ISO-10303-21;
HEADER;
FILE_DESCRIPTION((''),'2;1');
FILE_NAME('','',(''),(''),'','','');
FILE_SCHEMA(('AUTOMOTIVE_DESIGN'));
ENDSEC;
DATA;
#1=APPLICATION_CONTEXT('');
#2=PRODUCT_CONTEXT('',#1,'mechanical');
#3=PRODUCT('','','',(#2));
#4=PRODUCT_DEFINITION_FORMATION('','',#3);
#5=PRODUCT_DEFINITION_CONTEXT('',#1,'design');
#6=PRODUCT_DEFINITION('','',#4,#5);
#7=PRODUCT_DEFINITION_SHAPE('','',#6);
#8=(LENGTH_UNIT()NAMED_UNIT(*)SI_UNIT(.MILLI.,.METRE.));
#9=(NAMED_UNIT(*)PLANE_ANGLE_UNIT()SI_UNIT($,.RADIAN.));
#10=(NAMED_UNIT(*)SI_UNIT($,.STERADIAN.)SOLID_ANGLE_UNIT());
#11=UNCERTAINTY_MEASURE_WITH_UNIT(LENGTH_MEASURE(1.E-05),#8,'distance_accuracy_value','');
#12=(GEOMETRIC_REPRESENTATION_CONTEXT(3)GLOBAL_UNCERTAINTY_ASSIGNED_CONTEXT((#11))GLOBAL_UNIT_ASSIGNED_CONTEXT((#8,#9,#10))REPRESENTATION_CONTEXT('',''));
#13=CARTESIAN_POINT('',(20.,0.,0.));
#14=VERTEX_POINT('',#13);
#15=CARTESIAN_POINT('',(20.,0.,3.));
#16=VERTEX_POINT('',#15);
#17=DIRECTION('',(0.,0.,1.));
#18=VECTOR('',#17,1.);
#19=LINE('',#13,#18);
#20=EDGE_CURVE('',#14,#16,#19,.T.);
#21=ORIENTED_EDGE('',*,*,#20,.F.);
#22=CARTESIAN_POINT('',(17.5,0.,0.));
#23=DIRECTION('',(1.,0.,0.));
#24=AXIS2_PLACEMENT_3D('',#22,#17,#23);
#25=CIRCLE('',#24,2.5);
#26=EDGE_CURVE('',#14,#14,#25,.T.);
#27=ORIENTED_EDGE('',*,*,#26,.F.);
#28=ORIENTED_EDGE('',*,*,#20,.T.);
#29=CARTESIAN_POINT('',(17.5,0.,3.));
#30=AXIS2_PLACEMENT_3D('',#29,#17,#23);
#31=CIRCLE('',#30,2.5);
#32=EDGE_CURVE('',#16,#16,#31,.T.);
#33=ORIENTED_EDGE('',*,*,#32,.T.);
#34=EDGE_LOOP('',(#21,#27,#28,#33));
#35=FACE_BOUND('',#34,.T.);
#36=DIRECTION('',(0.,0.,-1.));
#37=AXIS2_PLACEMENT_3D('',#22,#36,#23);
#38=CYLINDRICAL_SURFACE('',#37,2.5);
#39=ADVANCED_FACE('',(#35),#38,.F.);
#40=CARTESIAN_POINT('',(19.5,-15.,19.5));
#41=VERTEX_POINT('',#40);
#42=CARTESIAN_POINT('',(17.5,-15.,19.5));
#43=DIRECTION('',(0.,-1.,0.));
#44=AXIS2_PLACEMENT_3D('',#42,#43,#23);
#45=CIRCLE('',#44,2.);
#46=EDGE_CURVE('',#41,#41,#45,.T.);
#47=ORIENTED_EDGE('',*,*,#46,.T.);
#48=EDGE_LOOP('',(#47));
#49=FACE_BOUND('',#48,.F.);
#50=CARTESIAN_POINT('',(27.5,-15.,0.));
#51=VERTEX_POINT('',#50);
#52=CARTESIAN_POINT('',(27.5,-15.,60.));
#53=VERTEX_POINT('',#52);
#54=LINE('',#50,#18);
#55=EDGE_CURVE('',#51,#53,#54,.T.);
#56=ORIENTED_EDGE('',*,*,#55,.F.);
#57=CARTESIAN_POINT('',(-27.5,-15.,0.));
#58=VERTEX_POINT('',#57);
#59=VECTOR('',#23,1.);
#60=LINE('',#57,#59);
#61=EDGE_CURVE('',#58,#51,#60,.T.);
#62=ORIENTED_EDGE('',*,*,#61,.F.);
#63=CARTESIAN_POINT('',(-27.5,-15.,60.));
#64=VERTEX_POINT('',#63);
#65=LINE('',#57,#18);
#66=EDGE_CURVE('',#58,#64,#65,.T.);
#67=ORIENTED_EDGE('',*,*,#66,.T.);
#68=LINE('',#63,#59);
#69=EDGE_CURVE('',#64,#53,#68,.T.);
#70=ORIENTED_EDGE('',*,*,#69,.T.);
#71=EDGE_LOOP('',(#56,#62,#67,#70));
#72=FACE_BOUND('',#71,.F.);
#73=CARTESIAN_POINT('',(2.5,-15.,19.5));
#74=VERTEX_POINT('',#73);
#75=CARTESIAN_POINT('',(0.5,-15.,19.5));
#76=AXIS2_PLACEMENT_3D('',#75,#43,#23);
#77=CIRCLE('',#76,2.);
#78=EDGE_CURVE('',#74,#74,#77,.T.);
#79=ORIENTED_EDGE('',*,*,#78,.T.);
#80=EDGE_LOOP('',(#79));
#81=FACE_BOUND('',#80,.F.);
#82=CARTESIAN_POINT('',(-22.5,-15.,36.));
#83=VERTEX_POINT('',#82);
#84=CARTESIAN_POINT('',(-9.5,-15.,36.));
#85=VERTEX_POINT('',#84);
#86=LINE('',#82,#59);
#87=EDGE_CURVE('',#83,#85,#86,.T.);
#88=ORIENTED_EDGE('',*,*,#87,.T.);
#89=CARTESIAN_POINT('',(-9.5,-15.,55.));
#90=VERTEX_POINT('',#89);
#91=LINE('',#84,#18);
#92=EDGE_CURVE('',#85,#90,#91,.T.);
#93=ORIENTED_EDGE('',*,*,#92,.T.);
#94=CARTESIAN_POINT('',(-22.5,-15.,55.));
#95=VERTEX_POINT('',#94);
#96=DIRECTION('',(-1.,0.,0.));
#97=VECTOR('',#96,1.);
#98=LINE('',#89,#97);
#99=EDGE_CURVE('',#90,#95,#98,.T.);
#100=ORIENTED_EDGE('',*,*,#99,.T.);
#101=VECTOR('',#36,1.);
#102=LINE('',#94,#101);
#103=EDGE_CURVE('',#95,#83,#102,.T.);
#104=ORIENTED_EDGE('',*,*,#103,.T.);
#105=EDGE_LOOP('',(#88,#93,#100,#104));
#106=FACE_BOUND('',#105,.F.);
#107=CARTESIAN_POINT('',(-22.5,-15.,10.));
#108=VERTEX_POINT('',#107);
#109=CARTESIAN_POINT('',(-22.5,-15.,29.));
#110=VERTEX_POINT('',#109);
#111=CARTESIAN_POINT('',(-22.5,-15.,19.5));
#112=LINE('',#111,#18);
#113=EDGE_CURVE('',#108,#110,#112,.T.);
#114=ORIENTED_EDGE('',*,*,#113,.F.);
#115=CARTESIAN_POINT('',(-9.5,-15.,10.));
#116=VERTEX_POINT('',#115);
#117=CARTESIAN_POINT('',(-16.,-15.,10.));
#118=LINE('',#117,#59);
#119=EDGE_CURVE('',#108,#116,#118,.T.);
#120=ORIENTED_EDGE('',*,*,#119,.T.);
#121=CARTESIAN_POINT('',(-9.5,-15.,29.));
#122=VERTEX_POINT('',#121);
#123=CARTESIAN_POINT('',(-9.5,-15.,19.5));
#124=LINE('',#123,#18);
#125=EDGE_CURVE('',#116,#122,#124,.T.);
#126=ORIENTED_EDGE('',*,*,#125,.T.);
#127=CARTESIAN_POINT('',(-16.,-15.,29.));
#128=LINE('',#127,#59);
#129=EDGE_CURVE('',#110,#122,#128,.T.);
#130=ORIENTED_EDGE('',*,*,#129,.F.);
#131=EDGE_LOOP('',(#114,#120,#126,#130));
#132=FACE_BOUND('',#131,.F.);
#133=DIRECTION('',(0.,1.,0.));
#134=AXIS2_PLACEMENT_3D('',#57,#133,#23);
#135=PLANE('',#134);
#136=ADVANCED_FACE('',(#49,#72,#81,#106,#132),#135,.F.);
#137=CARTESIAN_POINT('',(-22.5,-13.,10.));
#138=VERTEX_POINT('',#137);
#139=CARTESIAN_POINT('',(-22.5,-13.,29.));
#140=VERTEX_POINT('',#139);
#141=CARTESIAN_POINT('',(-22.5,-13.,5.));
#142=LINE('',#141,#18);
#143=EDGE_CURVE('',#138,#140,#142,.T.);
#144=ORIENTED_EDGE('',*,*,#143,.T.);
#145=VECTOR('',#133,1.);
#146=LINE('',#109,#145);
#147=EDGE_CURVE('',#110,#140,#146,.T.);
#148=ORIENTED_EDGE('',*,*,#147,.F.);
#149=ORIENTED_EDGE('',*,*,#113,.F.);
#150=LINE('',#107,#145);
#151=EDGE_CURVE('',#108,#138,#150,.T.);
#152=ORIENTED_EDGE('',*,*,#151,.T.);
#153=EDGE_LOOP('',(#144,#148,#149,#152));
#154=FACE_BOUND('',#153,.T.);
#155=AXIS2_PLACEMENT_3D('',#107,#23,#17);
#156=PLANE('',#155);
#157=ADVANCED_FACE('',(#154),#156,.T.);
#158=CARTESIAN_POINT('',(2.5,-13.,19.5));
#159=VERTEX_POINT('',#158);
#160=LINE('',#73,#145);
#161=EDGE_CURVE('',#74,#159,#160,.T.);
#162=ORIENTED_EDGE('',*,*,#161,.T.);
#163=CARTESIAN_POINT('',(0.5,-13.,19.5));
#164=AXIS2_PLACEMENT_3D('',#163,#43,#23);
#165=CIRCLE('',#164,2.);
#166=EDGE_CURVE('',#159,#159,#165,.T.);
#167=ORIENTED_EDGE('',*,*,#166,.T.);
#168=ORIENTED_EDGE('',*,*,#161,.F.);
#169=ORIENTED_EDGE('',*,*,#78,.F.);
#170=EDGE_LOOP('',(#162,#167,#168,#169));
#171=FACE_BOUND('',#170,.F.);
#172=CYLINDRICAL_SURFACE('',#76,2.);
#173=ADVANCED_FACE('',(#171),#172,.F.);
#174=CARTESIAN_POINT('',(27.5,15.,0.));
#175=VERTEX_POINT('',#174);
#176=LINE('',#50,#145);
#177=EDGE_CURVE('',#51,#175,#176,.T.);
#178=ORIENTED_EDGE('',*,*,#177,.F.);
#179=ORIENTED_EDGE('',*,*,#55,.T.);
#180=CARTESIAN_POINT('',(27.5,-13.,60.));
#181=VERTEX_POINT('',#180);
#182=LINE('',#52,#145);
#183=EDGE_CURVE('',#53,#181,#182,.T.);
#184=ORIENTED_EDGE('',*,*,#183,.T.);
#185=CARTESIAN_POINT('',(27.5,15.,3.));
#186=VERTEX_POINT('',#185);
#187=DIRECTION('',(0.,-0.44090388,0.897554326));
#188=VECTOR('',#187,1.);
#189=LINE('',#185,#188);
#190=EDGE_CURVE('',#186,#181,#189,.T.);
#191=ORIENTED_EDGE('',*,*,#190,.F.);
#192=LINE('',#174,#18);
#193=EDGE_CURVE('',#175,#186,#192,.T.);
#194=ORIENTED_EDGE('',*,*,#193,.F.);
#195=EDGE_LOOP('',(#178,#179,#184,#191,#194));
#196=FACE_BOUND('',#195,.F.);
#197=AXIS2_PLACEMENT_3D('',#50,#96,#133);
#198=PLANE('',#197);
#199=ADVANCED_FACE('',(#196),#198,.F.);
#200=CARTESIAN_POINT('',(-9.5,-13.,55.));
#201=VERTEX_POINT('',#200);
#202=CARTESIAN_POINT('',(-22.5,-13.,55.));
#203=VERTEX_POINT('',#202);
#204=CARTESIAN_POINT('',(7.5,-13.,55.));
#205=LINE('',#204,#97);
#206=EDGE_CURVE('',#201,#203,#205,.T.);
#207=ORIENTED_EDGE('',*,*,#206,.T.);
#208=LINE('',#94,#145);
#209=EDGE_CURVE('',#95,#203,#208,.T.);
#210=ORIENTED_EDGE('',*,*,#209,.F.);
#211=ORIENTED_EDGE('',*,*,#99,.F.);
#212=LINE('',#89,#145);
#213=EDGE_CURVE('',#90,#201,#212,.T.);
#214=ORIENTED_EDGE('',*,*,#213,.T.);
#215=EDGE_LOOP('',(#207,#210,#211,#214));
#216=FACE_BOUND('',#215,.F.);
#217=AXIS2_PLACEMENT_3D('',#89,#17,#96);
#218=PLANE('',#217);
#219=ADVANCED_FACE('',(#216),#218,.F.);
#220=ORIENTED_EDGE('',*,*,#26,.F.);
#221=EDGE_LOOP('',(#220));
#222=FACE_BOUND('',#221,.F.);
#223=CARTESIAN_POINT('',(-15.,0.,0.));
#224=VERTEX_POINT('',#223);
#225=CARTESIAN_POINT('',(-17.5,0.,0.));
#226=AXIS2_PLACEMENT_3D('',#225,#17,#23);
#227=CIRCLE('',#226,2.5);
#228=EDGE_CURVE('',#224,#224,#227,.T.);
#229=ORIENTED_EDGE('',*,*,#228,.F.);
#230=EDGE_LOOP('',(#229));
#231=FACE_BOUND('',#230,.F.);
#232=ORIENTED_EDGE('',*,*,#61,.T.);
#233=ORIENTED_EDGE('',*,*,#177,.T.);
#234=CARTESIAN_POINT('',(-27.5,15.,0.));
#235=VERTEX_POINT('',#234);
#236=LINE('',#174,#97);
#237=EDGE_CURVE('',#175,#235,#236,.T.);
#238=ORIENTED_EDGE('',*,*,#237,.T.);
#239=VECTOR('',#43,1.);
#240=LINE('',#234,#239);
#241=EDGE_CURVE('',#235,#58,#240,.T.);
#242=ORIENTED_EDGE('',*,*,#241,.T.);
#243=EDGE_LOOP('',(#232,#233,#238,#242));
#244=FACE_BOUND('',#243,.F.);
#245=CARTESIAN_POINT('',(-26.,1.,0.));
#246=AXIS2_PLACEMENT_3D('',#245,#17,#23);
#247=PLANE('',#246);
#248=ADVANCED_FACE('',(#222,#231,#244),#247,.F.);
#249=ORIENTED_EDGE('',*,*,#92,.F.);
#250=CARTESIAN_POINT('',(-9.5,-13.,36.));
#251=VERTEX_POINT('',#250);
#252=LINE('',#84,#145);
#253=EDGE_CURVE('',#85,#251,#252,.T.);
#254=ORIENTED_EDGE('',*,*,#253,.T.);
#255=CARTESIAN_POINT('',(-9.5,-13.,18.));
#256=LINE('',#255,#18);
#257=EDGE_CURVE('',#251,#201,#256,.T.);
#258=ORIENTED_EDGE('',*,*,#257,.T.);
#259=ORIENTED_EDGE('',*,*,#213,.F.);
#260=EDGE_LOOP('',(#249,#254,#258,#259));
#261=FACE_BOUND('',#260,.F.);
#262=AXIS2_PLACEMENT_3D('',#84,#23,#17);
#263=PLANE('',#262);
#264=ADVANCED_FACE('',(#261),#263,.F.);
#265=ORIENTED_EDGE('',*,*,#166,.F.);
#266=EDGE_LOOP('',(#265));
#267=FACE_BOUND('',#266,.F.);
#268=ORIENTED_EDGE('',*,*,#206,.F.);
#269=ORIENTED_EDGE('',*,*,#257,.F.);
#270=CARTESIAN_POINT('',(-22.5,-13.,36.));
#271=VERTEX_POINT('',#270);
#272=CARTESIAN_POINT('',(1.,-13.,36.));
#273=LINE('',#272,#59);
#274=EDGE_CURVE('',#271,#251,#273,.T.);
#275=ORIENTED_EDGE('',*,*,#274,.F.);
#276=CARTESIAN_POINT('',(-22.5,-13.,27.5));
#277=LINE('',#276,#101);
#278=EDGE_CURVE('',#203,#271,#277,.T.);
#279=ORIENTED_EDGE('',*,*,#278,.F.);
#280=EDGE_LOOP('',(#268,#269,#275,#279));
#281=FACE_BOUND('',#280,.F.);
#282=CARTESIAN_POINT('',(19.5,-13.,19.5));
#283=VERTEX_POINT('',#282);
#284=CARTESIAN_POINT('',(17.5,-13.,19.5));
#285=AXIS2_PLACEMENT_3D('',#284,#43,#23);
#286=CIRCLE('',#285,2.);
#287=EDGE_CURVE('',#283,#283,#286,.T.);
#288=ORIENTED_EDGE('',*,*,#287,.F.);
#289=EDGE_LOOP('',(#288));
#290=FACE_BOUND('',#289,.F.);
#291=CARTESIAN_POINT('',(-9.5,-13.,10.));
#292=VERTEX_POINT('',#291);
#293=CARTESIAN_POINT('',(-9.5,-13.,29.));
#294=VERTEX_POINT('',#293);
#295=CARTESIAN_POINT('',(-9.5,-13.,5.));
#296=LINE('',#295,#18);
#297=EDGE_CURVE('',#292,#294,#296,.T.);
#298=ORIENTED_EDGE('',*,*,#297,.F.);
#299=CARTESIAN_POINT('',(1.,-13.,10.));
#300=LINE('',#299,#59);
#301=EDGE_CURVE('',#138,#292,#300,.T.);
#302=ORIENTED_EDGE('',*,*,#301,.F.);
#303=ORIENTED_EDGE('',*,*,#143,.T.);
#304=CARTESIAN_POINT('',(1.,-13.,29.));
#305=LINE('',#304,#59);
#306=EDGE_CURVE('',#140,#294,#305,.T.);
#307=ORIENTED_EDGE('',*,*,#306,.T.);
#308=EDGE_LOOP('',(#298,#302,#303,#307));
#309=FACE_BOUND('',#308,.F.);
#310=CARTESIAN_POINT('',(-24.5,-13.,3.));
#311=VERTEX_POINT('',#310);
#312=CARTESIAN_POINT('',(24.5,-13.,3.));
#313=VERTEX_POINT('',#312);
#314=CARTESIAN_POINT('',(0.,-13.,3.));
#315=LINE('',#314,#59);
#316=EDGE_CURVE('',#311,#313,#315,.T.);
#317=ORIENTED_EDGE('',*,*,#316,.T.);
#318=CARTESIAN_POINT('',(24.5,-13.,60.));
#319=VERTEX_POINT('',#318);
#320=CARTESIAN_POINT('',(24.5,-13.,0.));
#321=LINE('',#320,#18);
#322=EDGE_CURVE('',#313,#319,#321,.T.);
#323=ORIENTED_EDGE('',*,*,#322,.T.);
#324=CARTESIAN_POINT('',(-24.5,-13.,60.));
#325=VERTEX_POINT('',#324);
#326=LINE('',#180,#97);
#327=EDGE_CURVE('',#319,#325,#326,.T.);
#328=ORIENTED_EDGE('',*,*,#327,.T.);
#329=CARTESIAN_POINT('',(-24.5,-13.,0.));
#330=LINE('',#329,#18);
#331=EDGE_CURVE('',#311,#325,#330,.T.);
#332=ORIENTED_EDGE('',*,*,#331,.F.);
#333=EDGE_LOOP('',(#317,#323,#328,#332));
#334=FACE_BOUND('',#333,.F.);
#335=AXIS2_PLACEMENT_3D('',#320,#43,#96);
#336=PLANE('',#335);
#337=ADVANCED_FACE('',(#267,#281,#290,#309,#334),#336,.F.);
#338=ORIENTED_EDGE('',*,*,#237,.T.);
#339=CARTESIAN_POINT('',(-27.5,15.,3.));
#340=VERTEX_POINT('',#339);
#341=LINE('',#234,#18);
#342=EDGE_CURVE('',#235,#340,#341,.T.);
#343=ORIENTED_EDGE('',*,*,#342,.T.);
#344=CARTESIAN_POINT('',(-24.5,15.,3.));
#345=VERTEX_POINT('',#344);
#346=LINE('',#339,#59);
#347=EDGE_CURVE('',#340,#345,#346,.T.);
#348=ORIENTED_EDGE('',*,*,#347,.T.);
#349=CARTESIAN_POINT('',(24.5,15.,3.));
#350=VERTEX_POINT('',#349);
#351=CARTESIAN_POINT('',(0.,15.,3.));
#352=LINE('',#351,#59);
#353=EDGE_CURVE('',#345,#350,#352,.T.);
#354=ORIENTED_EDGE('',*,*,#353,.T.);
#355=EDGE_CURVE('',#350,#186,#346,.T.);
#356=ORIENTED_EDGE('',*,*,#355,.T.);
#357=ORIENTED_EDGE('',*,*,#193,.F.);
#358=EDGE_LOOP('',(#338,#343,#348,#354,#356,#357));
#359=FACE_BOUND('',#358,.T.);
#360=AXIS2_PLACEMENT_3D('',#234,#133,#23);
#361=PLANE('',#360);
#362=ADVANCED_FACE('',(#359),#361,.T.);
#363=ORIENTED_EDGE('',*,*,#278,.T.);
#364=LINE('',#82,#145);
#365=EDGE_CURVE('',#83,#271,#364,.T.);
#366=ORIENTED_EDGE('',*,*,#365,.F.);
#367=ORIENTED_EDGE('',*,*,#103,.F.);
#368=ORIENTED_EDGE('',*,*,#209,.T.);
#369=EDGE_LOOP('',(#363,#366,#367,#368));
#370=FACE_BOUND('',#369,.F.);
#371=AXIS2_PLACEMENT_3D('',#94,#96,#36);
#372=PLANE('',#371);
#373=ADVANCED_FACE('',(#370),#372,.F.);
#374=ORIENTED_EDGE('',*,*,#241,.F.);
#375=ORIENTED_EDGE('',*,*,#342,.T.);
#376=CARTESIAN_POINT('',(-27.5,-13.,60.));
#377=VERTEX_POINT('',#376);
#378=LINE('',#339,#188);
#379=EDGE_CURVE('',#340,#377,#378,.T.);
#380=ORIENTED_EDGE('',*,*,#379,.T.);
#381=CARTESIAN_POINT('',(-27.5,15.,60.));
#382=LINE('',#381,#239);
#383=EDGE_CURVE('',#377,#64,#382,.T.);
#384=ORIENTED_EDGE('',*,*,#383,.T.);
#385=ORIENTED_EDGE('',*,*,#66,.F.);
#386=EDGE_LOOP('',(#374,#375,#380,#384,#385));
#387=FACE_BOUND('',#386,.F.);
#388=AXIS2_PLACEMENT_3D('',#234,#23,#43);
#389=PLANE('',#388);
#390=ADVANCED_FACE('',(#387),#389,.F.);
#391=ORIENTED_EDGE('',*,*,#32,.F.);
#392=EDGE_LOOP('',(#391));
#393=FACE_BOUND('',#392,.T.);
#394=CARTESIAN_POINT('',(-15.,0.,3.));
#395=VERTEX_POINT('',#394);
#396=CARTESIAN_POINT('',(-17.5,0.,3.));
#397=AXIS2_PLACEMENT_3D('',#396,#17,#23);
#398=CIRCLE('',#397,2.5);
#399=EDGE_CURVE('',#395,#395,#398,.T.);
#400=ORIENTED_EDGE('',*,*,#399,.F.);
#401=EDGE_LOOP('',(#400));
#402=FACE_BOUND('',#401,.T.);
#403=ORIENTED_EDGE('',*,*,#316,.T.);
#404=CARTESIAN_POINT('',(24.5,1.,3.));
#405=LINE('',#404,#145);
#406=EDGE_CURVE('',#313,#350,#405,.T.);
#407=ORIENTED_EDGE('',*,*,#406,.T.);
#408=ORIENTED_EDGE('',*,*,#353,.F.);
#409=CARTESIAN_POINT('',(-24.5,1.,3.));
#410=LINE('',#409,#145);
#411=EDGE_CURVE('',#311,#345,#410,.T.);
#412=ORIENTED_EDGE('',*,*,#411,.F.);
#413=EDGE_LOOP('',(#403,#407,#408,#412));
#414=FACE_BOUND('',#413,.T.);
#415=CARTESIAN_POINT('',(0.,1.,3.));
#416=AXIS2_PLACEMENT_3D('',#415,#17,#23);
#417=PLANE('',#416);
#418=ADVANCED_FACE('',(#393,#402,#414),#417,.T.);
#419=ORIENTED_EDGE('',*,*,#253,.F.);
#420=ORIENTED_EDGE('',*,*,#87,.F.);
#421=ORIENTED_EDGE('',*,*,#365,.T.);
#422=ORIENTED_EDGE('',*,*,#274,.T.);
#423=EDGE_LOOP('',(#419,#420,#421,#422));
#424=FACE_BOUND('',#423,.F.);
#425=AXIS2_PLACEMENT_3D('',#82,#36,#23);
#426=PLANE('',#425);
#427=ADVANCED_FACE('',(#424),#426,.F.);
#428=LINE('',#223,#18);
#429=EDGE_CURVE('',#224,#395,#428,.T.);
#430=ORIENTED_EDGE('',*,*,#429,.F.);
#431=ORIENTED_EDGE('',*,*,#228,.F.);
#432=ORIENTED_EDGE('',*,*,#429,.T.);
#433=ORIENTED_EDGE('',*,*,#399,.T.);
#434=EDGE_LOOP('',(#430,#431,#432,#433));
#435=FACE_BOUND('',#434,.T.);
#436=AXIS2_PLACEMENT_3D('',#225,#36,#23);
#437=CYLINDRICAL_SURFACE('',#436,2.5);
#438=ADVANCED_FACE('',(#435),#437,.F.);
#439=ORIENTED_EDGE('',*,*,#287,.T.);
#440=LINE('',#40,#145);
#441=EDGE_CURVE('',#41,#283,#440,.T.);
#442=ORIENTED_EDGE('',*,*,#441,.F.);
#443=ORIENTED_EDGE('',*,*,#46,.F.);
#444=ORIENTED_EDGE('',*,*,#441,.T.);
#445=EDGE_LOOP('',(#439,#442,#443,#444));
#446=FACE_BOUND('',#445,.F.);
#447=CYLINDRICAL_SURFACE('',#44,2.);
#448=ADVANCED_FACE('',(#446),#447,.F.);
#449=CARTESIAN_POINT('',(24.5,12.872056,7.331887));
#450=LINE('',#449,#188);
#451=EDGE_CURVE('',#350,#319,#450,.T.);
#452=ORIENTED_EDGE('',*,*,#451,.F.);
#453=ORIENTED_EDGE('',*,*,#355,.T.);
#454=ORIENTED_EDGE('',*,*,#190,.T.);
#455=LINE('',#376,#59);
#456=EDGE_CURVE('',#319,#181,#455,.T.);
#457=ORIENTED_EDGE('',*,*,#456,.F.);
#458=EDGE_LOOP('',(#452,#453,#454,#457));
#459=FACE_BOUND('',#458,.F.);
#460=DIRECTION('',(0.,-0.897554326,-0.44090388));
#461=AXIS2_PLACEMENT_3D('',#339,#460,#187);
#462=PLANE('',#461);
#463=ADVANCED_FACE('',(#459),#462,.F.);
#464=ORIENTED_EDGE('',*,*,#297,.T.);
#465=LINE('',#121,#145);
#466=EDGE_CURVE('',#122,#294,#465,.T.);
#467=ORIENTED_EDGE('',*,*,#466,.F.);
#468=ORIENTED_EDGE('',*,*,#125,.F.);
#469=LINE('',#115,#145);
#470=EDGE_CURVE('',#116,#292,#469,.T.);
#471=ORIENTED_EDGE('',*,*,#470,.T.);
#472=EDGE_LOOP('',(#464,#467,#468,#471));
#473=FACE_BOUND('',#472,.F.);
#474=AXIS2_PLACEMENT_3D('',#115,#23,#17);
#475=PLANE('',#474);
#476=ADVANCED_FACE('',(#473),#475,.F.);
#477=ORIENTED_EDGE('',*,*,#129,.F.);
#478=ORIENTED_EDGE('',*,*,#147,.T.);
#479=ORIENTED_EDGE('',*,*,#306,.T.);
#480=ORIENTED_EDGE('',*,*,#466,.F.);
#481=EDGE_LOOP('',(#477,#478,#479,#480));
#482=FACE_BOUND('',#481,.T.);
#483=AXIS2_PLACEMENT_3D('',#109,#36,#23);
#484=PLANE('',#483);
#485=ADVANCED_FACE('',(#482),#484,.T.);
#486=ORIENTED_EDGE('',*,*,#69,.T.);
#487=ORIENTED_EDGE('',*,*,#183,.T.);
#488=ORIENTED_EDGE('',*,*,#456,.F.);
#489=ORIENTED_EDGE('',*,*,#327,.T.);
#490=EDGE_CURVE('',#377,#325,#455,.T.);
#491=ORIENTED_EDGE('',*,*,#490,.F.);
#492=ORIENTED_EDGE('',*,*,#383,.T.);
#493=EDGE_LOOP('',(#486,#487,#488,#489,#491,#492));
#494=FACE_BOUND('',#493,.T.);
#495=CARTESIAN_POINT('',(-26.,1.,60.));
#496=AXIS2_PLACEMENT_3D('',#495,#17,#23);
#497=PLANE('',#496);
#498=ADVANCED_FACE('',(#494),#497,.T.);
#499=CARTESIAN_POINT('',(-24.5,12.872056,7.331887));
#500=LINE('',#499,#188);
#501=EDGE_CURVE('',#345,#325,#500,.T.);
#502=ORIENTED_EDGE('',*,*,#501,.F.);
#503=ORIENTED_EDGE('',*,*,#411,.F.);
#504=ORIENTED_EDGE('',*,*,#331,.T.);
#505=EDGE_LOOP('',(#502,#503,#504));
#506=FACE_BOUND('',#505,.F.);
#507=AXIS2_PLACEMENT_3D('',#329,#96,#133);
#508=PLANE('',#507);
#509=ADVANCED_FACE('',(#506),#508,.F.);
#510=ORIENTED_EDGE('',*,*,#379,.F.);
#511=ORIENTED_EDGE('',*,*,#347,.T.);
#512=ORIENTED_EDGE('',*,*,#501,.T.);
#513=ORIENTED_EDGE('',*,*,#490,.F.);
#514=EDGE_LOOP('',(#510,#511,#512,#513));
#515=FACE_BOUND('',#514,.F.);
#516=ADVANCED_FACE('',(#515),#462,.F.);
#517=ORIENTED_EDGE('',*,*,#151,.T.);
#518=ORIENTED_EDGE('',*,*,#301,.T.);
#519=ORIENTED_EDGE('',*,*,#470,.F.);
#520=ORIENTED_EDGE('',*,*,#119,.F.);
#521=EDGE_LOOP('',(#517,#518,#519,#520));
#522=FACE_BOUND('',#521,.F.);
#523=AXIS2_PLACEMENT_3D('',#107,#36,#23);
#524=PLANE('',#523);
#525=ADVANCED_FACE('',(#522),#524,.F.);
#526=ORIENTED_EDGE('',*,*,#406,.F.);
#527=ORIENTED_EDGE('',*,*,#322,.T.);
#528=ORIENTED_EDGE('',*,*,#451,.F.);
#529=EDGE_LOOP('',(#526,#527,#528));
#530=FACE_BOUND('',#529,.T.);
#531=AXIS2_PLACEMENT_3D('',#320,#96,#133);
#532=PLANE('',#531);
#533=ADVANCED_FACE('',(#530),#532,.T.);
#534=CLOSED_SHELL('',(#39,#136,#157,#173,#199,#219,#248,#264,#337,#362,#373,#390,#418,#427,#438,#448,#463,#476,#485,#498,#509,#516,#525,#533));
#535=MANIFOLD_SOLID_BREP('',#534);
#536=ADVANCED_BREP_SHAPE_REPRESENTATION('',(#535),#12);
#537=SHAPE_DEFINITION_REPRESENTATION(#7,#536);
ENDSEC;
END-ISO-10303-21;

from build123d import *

# Parameters (mm, degrees)
F0_W     = 49
F0_H     = 28
F0_R     = 2.5
F1_DEPTH = 3
F0_W_2   = 3
F0_H_2   = 2
F2_DEPTH = 60
F4_DEPTH = 55
F5_W     = 13
F5_H     = 19
F5_R     = 2
F6_DEPTH = 25


# Not quite as in the source:
# - a feature names something its author has since deleted; it is built from what else it names


with BuildPart() as f1:
    # F0 (on Top) → F1 (new body)
    with BuildSketch(Plane.XY):
        with Locations((0, 1)):
            Rectangle(F0_W, F0_H)
        with Locations((-17.5, 0)):
            Circle(F0_R, mode=Mode.SUBTRACT)
        with Locations((17.5, 0)):
            Circle(F0_R, mode=Mode.SUBTRACT)
    extrude(amount=F1_DEPTH)

    # F0 (on Top) → F2 (join)
    with BuildSketch(Plane.XY):
        with Locations((-26, 1)):
            Rectangle(F0_W_2, F0_H)
        with Locations((-26, -14)):
            Rectangle(F0_W_2, F0_H_2)
        with Locations((0, -14)):
            Rectangle(F0_W, F0_H_2)
        with Locations((26, -14)):
            Rectangle(F0_W_2, F0_H_2)
        with Locations((26, 1)):
            Rectangle(F0_W_2, F0_H)
    extrude(amount=F2_DEPTH)

    # F3 (on face) → F4 (cut)
    with BuildSketch(Plane(origin=(-27.5, 0, 0), x_dir=(0, -1, 0), z_dir=(-1, 0, 0))):
        Polygon((13, 60), (-15, 60), (-15, 3), align=None)
    extrude(amount=-F4_DEPTH, mode=Mode.SUBTRACT)

    # F5 (on face) → F6 (cut)
    with BuildSketch(Plane.XZ.offset(15)):
        Polygon((-22.5, 53), (-22.5, 36), (-9.5, 36), (-9.5, 55), (-22.5, 55), align=None)
        with Locations((-16, 19.5)):
            Rectangle(F5_W, F5_H)
        with Locations((0.5, 19.5)):
            Circle(F5_R)
        with Locations((17.5, 19.5)):
            Circle(F5_R)
    extrude(amount=-F6_DEPTH, mode=Mode.SUBTRACT)


solid = f1.part
